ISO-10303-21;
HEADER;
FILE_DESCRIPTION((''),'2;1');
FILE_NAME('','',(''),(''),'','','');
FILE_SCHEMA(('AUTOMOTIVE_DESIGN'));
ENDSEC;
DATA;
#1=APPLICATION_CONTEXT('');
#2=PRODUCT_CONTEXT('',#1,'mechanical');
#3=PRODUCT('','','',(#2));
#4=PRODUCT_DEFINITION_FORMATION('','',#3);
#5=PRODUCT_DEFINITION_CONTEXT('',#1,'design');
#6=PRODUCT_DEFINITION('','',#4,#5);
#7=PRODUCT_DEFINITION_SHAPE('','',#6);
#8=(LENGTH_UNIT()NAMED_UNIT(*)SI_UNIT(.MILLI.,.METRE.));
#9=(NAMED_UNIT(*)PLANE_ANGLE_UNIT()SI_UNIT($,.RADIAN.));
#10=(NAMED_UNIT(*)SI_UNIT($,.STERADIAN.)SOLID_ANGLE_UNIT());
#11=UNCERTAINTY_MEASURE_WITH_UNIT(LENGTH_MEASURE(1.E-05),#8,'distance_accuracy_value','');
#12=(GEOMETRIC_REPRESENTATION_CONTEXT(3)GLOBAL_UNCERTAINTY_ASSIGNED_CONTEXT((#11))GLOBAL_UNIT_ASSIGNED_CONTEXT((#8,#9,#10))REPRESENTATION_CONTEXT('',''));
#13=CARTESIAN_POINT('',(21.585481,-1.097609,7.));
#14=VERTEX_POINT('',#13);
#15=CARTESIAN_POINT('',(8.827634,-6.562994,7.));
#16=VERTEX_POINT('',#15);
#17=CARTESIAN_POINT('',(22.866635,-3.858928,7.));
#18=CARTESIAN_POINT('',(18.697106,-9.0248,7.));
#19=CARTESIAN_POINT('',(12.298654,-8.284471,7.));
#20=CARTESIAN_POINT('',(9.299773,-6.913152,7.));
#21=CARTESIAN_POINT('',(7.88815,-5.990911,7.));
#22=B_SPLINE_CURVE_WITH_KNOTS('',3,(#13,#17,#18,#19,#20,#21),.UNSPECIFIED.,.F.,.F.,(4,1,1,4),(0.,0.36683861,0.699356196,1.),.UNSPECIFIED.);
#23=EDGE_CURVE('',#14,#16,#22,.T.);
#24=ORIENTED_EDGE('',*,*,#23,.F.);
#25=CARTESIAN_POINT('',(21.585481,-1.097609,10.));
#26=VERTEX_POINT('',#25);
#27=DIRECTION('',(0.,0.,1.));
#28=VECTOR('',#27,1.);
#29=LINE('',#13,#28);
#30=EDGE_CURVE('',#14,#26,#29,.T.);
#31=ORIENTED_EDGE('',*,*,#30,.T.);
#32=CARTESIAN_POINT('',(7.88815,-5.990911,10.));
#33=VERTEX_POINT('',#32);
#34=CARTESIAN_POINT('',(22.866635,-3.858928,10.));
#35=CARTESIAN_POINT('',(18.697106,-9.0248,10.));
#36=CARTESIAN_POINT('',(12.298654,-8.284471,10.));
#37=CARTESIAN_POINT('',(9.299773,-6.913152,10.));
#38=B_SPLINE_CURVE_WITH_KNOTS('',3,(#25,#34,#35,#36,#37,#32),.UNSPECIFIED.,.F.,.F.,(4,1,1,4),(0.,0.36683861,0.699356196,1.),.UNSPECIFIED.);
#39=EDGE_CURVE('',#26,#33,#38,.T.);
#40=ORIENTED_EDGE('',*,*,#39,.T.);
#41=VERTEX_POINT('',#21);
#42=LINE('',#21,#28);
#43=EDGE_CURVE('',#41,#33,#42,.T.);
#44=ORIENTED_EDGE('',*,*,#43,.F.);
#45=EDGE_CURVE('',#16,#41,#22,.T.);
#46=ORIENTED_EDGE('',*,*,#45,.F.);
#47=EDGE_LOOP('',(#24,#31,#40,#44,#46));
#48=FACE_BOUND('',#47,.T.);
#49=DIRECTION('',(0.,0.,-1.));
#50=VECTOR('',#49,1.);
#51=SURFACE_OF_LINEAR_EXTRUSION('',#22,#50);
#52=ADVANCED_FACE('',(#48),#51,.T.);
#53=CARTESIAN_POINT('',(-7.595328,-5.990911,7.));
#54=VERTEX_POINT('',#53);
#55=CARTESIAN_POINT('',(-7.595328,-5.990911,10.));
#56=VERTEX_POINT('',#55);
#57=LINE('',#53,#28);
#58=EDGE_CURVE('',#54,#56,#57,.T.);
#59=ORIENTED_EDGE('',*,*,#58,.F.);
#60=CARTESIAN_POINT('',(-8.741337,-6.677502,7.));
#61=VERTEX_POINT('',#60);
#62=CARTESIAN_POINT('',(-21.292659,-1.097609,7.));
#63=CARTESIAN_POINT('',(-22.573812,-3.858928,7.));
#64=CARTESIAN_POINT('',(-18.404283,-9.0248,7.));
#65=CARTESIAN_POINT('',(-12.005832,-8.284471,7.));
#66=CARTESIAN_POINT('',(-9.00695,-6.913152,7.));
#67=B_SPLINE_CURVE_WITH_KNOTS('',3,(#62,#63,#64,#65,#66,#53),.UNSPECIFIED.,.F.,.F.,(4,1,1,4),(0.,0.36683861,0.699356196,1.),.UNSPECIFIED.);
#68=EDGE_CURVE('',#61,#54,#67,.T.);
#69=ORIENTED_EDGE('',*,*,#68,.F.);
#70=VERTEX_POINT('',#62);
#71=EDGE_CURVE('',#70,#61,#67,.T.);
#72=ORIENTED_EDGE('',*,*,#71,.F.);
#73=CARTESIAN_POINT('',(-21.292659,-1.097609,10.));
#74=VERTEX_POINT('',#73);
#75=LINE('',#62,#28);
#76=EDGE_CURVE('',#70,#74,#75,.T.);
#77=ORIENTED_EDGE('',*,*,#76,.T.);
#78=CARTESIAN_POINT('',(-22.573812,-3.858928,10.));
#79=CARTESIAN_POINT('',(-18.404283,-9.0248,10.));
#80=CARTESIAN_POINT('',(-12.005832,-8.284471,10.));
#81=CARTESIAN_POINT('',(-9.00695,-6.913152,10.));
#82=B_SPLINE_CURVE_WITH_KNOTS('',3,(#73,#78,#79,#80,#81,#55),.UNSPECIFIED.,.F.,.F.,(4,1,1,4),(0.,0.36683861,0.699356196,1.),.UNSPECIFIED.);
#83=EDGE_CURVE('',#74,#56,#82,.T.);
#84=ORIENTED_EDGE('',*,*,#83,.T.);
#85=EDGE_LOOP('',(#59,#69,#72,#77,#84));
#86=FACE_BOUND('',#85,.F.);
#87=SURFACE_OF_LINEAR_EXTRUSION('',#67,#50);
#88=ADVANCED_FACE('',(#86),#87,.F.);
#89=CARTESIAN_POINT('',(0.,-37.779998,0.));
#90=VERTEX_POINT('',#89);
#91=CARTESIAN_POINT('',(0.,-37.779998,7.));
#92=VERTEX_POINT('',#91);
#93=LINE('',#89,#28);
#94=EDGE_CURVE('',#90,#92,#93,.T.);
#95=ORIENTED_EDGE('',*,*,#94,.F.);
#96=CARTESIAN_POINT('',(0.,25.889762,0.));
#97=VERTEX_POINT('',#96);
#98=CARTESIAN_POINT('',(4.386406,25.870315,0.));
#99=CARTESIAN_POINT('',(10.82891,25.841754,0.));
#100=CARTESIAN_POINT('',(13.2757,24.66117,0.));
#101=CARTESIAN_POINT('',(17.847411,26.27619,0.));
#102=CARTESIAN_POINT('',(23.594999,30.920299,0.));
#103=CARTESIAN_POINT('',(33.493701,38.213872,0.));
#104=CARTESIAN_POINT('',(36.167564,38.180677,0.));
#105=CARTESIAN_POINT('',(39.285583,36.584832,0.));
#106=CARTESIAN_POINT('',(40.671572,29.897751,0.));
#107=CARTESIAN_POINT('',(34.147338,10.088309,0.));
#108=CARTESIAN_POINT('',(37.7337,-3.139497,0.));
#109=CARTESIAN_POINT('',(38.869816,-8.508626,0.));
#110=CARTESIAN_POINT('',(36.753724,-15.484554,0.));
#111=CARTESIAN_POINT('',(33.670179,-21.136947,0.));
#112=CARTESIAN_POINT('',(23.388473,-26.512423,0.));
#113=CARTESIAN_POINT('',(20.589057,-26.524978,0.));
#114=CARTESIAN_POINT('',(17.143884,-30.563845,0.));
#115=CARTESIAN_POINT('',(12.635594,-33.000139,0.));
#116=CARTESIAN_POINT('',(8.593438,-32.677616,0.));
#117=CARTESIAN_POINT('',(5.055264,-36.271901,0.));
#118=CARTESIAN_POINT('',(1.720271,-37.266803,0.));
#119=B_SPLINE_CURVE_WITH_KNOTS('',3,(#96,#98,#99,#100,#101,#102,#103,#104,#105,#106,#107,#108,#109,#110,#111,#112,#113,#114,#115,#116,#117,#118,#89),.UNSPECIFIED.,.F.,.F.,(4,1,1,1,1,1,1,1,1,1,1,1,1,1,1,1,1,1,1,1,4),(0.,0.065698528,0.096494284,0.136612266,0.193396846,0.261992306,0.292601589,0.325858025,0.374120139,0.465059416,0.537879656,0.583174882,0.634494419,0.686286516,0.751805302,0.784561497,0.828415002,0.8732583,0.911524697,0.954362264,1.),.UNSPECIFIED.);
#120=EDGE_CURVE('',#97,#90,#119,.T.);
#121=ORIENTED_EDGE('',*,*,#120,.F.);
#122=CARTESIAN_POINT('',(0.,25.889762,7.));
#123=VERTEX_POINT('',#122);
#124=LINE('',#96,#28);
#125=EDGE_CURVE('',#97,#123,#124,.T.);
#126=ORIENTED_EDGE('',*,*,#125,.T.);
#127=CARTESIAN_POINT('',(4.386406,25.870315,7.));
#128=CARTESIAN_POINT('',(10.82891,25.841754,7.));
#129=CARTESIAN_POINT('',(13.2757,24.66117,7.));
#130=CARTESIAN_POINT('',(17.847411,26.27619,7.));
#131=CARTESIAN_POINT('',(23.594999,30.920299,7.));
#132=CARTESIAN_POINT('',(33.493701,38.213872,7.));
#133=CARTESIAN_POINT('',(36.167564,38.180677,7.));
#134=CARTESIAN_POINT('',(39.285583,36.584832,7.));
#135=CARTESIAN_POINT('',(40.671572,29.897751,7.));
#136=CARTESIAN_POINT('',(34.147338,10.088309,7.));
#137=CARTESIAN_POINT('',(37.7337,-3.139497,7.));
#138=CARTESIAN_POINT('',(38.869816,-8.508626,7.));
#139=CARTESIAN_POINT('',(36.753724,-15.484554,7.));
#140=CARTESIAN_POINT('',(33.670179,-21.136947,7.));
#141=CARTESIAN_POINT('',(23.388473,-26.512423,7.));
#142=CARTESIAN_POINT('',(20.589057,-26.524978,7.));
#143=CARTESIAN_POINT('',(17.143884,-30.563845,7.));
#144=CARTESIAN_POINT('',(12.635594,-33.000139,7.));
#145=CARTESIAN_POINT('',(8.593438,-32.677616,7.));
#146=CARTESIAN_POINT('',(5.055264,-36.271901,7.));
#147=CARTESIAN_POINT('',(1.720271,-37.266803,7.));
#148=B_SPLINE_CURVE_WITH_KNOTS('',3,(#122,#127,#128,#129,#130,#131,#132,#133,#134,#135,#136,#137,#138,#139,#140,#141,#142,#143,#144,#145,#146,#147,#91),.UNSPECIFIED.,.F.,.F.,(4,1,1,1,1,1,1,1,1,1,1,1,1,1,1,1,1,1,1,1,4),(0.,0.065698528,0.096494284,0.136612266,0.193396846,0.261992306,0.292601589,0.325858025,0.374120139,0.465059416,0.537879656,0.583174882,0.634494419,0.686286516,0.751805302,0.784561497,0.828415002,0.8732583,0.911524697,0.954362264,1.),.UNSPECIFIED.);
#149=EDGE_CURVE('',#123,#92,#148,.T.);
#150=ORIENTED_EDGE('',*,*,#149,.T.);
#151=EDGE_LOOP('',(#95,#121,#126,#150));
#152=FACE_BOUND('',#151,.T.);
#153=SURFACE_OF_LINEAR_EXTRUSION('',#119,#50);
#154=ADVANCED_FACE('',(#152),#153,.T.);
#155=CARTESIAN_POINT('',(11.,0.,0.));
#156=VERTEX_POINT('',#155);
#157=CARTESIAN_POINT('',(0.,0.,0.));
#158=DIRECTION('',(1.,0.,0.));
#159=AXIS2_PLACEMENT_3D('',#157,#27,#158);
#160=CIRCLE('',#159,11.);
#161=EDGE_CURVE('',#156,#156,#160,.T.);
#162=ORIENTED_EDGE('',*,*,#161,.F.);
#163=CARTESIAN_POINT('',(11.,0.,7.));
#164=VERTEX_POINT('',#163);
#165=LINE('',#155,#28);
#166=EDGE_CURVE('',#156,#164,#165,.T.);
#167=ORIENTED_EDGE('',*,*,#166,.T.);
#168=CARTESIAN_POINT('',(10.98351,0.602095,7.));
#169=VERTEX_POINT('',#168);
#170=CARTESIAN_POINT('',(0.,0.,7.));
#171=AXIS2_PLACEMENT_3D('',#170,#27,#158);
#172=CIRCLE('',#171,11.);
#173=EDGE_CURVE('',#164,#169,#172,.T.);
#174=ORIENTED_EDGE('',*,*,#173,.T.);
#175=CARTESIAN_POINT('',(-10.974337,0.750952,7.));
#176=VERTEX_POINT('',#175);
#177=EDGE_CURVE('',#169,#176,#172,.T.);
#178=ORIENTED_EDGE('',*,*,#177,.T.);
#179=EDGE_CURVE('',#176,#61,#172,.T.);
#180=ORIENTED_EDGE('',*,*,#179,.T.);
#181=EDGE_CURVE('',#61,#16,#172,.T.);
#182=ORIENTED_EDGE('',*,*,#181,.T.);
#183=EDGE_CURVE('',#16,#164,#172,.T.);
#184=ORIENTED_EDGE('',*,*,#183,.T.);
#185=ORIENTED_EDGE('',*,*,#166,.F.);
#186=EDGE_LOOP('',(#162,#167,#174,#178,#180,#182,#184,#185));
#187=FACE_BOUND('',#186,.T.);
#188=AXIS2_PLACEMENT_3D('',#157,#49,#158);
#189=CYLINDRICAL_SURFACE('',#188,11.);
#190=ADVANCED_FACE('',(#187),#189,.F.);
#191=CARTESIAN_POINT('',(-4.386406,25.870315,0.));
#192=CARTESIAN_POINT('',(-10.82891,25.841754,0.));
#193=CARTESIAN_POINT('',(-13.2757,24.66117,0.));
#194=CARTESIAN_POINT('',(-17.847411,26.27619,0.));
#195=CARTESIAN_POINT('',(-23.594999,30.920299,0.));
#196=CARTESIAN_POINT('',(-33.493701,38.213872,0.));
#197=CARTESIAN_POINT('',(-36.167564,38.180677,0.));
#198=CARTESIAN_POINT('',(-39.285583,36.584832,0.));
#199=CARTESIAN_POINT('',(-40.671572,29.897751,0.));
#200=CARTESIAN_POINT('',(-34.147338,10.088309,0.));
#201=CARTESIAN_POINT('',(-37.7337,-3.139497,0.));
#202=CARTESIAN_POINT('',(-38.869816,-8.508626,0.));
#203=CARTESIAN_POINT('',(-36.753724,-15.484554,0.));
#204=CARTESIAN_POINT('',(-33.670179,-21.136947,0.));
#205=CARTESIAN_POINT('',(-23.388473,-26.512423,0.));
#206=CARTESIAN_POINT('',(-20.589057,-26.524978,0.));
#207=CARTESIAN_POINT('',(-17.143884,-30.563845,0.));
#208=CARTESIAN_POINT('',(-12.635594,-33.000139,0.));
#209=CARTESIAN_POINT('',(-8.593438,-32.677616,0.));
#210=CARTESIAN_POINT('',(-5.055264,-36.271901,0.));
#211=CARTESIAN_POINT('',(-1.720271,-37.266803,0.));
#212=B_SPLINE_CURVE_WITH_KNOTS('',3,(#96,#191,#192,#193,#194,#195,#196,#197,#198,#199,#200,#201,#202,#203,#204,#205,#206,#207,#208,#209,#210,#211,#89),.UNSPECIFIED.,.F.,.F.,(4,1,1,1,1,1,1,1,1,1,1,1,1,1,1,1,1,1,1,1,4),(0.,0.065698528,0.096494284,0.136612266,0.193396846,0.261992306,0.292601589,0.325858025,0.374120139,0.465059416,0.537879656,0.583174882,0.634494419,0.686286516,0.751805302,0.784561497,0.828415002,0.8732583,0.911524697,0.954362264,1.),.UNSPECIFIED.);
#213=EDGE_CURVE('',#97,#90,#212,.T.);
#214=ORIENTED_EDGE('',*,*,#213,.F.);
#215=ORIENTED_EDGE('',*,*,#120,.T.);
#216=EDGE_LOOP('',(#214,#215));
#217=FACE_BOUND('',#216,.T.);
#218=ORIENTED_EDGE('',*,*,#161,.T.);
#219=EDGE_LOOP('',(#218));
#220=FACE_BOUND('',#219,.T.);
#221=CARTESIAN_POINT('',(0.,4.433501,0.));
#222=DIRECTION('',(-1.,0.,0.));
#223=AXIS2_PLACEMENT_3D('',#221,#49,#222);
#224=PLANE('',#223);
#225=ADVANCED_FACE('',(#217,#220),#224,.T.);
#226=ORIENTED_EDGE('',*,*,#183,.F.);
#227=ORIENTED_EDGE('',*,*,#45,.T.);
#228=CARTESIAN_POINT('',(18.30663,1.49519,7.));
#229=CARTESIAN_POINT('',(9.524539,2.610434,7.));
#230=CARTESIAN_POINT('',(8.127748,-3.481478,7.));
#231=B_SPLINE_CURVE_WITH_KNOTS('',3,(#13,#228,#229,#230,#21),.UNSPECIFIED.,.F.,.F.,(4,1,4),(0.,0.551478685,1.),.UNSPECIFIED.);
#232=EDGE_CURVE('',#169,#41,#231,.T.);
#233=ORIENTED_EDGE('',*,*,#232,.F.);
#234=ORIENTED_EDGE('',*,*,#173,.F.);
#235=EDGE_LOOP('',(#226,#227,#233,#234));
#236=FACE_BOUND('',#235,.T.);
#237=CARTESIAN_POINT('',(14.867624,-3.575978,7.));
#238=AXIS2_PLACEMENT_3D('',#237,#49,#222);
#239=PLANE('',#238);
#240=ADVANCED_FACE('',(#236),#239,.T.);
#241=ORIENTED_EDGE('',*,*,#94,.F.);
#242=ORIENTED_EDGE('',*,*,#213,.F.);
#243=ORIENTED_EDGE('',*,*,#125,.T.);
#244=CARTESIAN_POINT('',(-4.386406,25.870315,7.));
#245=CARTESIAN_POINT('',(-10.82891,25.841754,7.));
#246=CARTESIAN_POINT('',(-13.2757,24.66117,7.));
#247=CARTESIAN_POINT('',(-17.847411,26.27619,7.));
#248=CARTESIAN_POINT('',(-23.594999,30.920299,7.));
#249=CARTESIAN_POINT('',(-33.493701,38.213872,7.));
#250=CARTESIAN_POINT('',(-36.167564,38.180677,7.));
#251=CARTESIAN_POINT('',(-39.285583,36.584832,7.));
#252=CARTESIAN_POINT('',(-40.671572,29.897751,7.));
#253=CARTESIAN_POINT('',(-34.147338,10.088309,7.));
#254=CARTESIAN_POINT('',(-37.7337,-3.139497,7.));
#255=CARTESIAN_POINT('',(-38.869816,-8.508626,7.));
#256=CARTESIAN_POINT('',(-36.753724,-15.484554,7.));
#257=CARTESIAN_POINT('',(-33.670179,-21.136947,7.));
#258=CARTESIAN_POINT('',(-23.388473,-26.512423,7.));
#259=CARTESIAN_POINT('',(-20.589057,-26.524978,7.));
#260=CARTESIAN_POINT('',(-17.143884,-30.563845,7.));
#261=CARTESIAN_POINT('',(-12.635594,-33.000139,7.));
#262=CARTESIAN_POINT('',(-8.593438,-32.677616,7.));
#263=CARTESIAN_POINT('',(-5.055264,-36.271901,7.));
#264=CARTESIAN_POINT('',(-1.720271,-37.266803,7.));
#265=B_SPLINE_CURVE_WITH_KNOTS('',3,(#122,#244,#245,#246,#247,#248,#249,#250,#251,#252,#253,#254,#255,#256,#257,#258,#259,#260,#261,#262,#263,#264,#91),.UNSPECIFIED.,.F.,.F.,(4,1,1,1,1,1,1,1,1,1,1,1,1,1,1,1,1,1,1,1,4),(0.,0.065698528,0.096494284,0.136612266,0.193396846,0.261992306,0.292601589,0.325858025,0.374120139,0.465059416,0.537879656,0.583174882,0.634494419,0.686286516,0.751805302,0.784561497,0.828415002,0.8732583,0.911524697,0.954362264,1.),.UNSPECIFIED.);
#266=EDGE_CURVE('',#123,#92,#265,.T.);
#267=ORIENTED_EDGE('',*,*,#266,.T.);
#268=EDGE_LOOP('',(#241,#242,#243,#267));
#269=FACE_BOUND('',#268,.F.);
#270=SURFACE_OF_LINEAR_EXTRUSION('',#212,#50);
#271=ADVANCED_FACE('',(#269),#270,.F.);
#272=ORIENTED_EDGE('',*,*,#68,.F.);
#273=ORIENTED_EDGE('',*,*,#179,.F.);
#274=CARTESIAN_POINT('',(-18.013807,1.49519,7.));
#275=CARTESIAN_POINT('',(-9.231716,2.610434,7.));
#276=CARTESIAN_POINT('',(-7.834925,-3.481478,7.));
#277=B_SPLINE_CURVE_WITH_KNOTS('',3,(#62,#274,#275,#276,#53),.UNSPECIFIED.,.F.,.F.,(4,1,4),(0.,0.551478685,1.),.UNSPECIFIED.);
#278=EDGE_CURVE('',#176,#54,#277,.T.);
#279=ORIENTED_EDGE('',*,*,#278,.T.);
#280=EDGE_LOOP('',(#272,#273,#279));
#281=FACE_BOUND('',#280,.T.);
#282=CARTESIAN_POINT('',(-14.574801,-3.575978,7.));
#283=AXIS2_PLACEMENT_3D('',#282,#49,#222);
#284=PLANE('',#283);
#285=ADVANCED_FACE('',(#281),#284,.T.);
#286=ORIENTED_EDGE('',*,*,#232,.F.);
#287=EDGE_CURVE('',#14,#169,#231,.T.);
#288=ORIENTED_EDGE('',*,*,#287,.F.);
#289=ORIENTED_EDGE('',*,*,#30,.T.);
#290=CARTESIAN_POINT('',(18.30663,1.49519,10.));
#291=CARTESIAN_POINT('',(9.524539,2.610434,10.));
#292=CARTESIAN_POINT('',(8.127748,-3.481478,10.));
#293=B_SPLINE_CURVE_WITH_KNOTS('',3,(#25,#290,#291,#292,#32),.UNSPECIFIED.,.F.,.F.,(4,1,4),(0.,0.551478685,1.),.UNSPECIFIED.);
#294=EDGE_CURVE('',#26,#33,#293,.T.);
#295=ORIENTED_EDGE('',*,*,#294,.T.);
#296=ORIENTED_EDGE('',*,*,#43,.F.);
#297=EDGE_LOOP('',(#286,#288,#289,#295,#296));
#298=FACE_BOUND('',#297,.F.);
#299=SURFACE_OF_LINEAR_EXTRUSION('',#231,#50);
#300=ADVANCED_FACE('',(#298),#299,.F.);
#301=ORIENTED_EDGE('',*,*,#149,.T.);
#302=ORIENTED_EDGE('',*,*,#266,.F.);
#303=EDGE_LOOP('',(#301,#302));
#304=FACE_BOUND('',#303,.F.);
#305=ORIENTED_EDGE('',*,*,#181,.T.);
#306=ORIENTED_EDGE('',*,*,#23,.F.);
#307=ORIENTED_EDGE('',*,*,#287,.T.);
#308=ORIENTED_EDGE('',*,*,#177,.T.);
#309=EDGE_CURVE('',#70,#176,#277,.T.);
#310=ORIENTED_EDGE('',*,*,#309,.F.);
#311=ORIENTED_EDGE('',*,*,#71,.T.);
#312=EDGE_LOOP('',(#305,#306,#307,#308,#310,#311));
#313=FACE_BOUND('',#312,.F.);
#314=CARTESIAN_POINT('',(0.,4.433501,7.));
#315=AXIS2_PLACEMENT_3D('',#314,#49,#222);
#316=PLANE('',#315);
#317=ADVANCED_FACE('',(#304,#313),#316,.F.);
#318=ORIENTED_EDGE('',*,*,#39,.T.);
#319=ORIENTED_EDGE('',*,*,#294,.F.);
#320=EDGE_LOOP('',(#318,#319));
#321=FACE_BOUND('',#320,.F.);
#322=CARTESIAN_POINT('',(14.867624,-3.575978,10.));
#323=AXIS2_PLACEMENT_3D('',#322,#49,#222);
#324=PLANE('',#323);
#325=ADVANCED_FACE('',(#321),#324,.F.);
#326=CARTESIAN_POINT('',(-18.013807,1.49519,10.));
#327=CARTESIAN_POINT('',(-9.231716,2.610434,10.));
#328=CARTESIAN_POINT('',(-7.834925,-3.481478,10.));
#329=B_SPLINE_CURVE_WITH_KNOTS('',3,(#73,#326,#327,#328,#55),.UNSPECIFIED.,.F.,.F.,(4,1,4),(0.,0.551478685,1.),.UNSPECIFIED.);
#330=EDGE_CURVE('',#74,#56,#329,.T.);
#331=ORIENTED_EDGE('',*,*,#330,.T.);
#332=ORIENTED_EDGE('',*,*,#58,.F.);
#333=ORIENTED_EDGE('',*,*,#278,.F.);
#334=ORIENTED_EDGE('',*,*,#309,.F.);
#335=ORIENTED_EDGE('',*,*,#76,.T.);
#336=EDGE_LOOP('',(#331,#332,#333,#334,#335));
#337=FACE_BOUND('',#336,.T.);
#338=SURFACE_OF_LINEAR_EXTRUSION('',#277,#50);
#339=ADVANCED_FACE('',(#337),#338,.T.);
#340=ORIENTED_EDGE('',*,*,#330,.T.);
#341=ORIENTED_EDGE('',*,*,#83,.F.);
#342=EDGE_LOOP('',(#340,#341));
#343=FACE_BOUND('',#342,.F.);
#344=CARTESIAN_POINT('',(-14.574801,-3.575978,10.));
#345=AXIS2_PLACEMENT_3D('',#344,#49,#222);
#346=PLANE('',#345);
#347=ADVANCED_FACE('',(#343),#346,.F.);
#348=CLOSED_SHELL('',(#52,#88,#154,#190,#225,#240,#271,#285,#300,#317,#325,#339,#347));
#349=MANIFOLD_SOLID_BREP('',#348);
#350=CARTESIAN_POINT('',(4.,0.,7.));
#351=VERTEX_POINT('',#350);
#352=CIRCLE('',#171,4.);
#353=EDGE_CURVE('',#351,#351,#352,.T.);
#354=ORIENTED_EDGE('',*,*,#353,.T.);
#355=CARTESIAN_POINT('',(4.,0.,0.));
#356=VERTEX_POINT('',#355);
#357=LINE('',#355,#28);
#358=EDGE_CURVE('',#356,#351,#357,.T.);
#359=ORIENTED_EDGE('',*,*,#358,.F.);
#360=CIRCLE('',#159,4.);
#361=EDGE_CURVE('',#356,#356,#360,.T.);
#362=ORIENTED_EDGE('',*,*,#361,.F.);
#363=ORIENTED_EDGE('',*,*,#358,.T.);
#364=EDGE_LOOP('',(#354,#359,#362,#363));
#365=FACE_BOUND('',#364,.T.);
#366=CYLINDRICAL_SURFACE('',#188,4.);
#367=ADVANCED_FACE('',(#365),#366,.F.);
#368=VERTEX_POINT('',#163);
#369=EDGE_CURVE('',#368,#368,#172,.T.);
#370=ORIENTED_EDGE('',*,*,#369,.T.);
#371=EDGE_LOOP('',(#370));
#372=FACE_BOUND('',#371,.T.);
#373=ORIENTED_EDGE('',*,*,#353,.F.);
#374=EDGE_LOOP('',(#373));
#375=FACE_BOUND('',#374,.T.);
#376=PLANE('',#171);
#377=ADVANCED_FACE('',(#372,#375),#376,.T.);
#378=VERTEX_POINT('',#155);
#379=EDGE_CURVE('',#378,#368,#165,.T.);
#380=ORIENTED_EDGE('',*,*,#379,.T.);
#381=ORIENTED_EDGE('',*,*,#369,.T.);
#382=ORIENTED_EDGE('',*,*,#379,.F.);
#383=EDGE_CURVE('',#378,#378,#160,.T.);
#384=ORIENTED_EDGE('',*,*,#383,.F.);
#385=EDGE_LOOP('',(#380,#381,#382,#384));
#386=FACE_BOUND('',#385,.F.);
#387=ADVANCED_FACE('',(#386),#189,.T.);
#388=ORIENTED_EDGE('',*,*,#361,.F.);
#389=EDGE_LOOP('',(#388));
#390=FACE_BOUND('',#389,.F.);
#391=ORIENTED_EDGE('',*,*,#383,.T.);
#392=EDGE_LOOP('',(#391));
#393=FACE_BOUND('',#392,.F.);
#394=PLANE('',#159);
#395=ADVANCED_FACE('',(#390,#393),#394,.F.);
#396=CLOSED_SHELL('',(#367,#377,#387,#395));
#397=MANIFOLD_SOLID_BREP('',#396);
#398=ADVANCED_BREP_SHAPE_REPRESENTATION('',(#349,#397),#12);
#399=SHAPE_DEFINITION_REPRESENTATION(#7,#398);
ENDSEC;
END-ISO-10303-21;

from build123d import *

# Parameters (mm, degrees)
F1_R     = 11
F1_R_2   = 4
F2_DEPTH = 7
F3_R     = 11
F4_DEPTH = 7
F6_DEPTH = 3


with BuildPart() as f2:
    # F1 (on Top) → F2 (new body)
    with BuildSketch(Plane.XY):
        Circle(F1_R)
        Circle(F1_R_2, mode=Mode.SUBTRACT)
    extrude(amount=F2_DEPTH)


with BuildPart() as f4:
    # F3 (on Top) → F4 (new body, through all)
    with BuildSketch(Plane.XY):
        with BuildLine():
            add(Edge.make_bspline(
                [(0, 25.8897617459), (4.3864055569, 25.8703153674), (10.8289101146, 25.8417536259), (13.2757002483, 24.6611704296), (17.8474108812, 26.2761901904), (23.594998976, 30.9202992901), (33.4937013261, 38.2138715063), (36.1675639167, 38.1806773323), (39.2855825143, 36.5848315949), (40.6715724711, 29.8977509674), (34.1473376422, 10.0883092219), (37.7336996012, -3.1394968098), (38.8698157184, -8.5086259705), (36.7537244866, -15.4845539707), (33.6701790157, -21.1369466388), (23.38847337, -26.5124231681), (20.5890565286, -26.5249775413), (17.1438835411, -30.5638448818), (12.6355944839, -33.0001390733), (8.5934381149, -32.6776161387), (5.0552641204, -36.2719007466), (1.7202712663, -37.2668030025), (0, -37.7799980342)],
                knots=[0, 0, 0, 0, 0.0656985275, 0.0964942838, 0.1366122657, 0.1933968461, 0.2619923062, 0.2926015893, 0.3258580246, 0.3741201394, 0.4650594165, 0.5378796558, 0.5831748819, 0.6344944194, 0.6862865162, 0.751805302, 0.784561497, 0.8284150022, 0.8732582997, 0.9115246968, 0.9543622644, 1, 1, 1, 1], degree=3))
            add(Edge.make_bspline(
                [(0, 25.8897617459), (-4.3864055569, 25.8703153674), (-10.8289101146, 25.8417536259), (-13.2757002483, 24.6611704296), (-17.8474108812, 26.2761901904), (-23.594998976, 30.9202992901), (-33.4937013261, 38.2138715063), (-36.1675639167, 38.1806773323), (-39.2855825143, 36.5848315949), (-40.6715724711, 29.8977509674), (-34.1473376422, 10.0883092219), (-37.7336996012, -3.1394968098), (-38.8698157184, -8.5086259705), (-36.7537244866, -15.4845539707), (-33.6701790157, -21.1369466388), (-23.38847337, -26.5124231681), (-20.5890565286, -26.5249775413), (-17.1438835411, -30.5638448818), (-12.6355944839, -33.0001390733), (-8.5934381149, -32.6776161387), (-5.0552641204, -36.2719007466), (-1.7202712663, -37.2668030025), (0, -37.7799980342)],
                knots=[0, 0, 0, 0, 0.0656985275, 0.0964942838, 0.1366122657, 0.1933968461, 0.2619923062, 0.2926015893, 0.3258580246, 0.3741201394, 0.4650594165, 0.5378796558, 0.5831748819, 0.6344944194, 0.6862865162, 0.751805302, 0.784561497, 0.8284150022, 0.8732582997, 0.9115246968, 0.9543622644, 1, 1, 1, 1], degree=3))
        make_face()
        Circle(F3_R, mode=Mode.SUBTRACT)
    extrude(amount=F4_DEPTH)

    # F5 (on face) → F6 (join)
    with BuildSketch(Plane.XY.offset(7)):
        with BuildLine():
            add(Edge.make_bspline(
                [(-21.2926585227, -1.0976089765), (-18.013806867, 1.4951896728), (-9.2317163321, 2.6104336842), (-7.8349251726, -3.4814778137), (-7.5953276828, -5.9909114283)],
                knots=[0, 0, 0, 0, 0.5514786848, 1, 1, 1, 1], degree=3))
            add(Edge.make_bspline(
                [(-21.2926585227, -1.0976089765), (-22.5738119334, -3.8589280234), (-18.404282887, -9.0247998666), (-12.0058316522, -8.2844709159), (-9.006950172, -6.913152259), (-7.5953276828, -5.9909114283)],
                knots=[0, 0, 0, 0, 0.3668386095, 0.6993561955, 1, 1, 1, 1], degree=3))
        make_face()
        with BuildLine():
            add(Edge.make_bspline(
                [(21.5854812413, -1.0976089765), (22.866634652, -3.8589280234), (18.6971056056, -9.0247998666), (12.2986543708, -8.2844709159), (9.2997728906, -6.913152259), (7.8881504014, -5.9909114283)],
                knots=[0, 0, 0, 0, 0.3668386095, 0.6993561955, 1, 1, 1, 1], degree=3))
            add(Edge.make_bspline(
                [(21.5854812413, -1.0976089765), (18.3066295856, 1.4951896728), (9.5245390508, 2.6104336842), (8.1277478912, -3.4814778137), (7.8881504014, -5.9909114283)],
                knots=[0, 0, 0, 0, 0.5514786848, 1, 1, 1, 1], degree=3))
        make_face()
    extrude(amount=F6_DEPTH)


solid = Compound([f2.part, f4.part])
